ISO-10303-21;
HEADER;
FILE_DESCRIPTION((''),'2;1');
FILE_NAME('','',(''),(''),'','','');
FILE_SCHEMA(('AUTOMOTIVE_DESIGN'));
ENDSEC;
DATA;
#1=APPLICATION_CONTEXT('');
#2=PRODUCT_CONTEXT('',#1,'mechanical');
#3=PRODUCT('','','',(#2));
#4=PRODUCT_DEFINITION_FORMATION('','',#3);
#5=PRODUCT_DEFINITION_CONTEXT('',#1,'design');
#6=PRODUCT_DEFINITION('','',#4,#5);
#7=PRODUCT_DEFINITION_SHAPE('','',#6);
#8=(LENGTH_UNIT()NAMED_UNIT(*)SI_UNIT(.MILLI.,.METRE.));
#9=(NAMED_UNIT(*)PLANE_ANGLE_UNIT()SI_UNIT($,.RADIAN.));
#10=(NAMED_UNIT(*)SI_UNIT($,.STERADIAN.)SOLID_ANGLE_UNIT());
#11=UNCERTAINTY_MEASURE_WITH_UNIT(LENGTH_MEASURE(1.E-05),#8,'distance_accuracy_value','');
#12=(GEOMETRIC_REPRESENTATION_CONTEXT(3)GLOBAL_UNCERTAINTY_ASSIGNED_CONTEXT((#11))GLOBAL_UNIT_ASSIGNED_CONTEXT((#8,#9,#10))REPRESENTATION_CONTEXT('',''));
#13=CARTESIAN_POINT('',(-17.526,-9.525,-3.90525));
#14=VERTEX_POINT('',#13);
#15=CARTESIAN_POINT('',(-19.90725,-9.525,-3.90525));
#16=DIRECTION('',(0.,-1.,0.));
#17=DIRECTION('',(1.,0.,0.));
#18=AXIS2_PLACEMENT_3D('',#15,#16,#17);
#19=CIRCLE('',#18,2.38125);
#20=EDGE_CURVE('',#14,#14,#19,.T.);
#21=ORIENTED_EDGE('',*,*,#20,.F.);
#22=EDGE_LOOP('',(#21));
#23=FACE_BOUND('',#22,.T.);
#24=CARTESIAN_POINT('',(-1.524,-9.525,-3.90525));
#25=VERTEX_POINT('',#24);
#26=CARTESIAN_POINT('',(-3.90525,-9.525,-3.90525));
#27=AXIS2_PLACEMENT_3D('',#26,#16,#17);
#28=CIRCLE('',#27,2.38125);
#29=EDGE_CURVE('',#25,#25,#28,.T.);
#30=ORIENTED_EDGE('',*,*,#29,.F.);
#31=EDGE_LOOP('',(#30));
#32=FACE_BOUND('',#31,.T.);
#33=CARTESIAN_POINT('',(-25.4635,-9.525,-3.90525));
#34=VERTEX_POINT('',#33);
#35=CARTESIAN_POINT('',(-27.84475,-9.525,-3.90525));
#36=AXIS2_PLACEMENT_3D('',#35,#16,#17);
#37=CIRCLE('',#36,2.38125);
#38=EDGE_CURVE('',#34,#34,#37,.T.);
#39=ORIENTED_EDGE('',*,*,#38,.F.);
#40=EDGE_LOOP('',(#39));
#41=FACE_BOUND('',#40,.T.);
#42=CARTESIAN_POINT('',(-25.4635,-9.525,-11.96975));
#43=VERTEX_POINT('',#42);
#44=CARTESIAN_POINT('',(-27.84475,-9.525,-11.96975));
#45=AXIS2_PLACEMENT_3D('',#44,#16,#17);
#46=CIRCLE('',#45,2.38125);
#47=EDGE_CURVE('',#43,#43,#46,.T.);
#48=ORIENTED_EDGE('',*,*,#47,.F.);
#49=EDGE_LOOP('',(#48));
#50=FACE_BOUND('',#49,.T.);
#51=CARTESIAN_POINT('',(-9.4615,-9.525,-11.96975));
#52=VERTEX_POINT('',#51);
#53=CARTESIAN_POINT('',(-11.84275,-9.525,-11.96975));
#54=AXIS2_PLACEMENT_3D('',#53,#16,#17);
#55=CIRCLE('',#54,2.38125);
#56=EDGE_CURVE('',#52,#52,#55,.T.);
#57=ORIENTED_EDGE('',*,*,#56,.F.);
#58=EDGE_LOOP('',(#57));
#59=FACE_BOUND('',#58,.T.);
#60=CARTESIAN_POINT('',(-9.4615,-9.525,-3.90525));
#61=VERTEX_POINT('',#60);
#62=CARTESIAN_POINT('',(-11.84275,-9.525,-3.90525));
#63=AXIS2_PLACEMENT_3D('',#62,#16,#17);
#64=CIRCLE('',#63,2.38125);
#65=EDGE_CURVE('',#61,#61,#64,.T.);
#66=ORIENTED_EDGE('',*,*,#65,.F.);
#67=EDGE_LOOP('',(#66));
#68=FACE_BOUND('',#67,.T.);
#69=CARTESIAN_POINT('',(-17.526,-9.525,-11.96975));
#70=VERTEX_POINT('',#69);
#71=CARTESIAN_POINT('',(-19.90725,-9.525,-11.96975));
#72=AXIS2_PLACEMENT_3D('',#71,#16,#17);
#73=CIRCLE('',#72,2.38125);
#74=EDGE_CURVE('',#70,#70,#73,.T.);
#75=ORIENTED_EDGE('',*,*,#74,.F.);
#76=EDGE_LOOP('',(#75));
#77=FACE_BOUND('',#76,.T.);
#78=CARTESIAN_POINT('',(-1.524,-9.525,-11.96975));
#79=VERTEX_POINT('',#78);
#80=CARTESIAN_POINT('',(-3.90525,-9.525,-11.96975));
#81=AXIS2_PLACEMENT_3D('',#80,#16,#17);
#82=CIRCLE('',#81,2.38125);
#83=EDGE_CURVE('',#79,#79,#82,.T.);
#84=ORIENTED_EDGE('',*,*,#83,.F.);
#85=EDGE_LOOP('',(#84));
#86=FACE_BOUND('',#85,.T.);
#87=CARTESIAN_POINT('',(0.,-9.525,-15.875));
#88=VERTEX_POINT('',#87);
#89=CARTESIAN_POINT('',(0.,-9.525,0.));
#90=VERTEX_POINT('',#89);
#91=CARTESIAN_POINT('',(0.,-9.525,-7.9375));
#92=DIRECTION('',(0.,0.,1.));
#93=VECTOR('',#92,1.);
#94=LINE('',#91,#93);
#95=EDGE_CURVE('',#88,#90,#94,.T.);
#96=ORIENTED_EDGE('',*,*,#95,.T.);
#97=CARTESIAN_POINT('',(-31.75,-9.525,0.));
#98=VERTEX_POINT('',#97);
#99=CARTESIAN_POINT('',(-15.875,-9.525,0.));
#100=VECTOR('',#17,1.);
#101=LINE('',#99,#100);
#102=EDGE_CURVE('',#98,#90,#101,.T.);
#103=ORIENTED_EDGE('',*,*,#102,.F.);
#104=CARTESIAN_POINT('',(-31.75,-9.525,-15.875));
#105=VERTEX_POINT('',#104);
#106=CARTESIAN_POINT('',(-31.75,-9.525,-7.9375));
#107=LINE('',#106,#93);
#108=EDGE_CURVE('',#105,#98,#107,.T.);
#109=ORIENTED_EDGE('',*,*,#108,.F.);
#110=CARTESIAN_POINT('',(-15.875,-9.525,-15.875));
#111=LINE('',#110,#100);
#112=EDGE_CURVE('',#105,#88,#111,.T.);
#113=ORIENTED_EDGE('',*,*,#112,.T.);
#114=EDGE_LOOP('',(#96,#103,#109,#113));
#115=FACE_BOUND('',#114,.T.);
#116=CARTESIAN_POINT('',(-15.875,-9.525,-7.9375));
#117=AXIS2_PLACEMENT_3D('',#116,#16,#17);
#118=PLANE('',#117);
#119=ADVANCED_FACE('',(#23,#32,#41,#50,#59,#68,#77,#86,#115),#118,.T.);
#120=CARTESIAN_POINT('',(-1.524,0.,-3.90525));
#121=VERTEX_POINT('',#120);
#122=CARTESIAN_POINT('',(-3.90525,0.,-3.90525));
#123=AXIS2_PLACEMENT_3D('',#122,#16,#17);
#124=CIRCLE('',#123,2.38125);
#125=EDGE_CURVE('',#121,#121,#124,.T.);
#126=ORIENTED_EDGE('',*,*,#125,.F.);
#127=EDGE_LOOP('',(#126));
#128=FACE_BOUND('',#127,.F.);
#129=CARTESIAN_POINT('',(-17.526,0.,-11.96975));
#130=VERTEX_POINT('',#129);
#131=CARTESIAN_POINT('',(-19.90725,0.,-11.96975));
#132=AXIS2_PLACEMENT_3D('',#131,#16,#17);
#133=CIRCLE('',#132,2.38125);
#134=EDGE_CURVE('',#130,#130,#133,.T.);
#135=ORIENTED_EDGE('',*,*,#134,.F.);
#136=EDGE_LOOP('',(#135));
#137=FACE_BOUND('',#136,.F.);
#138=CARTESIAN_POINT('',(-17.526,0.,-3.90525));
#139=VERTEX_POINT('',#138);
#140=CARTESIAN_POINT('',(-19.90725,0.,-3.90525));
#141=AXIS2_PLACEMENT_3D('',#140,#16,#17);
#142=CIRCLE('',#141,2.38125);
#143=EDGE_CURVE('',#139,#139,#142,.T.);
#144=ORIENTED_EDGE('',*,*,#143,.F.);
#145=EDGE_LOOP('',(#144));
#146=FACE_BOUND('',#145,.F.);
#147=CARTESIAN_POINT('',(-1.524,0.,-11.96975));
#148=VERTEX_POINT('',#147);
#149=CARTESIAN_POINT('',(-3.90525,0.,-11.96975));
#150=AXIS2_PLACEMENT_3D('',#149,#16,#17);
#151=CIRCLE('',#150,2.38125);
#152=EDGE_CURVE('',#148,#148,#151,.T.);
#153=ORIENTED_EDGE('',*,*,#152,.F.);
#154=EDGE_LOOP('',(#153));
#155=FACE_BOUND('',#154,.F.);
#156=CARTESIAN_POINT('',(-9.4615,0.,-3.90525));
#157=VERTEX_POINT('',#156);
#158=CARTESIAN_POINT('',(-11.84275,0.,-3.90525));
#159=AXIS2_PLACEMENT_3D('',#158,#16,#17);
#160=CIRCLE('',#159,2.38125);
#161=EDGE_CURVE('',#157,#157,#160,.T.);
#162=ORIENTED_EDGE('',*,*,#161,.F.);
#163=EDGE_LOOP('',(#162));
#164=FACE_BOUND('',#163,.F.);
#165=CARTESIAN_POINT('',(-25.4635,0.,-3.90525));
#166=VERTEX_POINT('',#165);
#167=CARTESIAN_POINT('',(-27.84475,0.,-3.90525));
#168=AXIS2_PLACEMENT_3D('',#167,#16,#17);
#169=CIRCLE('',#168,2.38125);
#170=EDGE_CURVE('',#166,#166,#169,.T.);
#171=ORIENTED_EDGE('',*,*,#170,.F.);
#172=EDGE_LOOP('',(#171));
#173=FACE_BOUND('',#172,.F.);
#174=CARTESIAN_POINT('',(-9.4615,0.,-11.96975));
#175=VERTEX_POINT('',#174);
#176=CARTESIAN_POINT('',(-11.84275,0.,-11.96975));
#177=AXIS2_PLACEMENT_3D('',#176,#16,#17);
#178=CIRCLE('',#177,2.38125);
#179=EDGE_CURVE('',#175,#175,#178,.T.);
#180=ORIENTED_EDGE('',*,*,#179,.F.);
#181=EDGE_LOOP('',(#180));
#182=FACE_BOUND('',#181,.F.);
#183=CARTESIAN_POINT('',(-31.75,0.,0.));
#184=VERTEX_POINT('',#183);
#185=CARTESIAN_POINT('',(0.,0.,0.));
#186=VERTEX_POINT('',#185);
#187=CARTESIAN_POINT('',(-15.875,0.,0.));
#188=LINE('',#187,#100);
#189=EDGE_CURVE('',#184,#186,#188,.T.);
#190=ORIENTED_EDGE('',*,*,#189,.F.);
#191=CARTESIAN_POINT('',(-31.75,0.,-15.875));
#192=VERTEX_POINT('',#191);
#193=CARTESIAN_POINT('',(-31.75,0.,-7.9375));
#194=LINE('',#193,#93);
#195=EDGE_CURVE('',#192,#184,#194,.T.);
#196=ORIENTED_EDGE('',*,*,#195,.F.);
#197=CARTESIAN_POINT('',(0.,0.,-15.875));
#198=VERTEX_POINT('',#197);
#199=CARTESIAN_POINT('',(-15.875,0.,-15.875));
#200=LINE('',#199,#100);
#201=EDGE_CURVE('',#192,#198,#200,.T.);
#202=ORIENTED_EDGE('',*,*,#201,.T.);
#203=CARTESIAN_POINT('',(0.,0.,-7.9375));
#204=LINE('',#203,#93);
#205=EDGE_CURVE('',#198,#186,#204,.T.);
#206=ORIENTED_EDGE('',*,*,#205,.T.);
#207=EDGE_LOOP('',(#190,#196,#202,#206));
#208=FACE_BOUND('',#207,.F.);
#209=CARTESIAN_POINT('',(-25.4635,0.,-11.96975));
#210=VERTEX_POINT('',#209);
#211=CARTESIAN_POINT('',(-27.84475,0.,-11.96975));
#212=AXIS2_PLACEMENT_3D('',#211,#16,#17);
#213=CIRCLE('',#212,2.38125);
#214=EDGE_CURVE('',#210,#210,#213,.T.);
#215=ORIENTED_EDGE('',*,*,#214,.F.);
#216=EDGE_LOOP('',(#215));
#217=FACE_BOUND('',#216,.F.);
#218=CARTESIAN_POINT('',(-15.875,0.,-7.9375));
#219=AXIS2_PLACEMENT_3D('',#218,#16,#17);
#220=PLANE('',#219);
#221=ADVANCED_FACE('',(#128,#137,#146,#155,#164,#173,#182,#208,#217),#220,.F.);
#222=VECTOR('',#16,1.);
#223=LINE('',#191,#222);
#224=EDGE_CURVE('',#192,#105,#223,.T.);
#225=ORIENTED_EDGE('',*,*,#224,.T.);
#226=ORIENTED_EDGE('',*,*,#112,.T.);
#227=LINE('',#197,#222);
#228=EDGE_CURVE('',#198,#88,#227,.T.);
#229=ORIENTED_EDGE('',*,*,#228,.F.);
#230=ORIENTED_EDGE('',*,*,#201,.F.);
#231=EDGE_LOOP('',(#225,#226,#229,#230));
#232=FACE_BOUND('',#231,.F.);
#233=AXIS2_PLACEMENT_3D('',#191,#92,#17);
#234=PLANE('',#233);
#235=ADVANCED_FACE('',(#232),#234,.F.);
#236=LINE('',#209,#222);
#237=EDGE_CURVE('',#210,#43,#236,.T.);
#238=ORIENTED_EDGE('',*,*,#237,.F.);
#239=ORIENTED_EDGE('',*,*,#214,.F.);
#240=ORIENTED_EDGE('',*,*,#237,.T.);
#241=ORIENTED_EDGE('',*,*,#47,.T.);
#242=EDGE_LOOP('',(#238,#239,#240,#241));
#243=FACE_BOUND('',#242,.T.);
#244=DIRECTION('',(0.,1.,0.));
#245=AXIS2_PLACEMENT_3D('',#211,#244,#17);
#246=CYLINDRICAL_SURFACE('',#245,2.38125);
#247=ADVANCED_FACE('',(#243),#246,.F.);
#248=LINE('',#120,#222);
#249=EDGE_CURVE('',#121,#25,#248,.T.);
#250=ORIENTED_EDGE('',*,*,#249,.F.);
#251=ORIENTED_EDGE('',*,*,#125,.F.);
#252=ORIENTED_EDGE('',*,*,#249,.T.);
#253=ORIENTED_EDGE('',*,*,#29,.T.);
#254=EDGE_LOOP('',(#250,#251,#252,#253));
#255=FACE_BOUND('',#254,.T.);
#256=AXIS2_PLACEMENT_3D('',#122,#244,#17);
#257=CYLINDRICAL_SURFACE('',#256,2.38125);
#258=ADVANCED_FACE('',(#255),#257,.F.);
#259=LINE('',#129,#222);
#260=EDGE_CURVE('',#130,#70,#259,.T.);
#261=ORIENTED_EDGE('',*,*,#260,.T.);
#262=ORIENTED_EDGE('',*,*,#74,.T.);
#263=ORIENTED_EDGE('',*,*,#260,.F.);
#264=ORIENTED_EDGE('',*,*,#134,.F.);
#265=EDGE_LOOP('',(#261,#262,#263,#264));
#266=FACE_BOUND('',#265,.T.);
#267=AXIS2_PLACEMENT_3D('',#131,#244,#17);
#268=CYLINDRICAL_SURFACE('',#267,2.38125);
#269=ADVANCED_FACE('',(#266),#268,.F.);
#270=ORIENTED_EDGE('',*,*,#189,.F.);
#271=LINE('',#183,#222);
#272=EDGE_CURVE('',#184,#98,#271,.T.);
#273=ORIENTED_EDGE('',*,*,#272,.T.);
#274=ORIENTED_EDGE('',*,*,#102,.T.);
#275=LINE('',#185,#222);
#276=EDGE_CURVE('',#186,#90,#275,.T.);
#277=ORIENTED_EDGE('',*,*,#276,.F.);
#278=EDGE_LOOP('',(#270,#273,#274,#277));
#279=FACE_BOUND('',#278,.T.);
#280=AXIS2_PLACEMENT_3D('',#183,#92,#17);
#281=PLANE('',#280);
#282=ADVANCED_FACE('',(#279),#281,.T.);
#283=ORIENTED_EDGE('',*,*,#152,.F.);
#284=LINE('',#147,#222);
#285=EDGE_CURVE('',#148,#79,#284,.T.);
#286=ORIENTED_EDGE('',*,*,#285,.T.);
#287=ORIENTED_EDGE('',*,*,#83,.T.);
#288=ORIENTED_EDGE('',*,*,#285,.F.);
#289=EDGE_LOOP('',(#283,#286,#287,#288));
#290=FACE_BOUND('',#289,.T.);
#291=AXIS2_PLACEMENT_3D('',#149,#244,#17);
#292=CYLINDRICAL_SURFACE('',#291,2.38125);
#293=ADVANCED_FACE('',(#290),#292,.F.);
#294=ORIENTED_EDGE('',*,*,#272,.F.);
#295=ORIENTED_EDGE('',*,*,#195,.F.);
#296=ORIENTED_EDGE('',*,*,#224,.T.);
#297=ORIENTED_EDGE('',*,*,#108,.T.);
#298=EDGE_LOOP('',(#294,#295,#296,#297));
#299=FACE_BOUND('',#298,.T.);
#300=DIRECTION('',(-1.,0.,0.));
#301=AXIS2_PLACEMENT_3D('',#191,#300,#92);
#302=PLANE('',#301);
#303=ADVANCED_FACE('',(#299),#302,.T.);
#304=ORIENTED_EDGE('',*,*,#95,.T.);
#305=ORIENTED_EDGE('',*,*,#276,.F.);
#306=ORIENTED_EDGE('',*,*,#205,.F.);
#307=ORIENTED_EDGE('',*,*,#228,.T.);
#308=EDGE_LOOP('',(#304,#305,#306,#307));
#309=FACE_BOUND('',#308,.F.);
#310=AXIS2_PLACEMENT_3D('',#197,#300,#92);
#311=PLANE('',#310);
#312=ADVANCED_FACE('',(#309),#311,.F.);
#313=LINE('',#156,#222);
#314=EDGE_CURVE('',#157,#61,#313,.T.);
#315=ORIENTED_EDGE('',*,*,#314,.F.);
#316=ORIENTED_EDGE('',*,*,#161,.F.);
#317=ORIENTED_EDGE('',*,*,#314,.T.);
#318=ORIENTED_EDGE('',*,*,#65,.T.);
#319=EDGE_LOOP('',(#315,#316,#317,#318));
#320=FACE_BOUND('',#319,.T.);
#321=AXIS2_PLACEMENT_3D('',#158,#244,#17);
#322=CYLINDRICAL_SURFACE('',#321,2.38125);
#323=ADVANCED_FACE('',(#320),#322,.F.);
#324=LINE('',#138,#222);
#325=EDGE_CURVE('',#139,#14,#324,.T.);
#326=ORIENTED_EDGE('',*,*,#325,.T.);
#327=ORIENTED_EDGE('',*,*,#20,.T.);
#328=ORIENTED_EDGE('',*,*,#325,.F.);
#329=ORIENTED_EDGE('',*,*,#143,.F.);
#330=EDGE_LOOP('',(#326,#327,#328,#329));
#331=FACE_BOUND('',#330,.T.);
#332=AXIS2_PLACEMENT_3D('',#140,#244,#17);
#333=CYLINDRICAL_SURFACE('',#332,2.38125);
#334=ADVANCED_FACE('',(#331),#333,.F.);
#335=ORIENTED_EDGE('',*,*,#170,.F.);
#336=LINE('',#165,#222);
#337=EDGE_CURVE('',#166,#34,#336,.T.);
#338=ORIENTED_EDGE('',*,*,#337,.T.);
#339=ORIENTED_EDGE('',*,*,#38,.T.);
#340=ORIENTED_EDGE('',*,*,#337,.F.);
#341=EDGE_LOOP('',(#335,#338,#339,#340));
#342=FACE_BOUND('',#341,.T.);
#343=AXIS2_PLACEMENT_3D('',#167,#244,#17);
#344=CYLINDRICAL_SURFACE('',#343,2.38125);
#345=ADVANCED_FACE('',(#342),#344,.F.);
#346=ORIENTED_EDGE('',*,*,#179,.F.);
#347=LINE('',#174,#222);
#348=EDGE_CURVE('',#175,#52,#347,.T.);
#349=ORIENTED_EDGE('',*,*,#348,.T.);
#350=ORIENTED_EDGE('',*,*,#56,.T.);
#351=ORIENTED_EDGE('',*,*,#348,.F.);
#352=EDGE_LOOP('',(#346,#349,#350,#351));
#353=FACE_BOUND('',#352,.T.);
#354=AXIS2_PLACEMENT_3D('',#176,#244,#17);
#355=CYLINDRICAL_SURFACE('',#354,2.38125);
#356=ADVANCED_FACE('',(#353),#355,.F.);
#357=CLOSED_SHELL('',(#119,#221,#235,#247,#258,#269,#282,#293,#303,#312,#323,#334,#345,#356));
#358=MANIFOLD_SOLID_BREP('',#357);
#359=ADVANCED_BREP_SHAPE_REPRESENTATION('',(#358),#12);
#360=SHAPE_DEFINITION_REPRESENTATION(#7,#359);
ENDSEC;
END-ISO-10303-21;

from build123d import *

# Parameters (mm, degrees)
F0_W     = 31.75
F0_H     = 15.875
F0_R     = 2.38125
F1_DEPTH = 9.525


# Not quite as in the source:
# - the program builds the solid bodies; features that only make, move or delete a surface that nothing else refers to are left out


with BuildPart() as f1:
    # F0 (on Front) → F1 (new body)
    with BuildSketch(Plane.XZ):
        with Locations((-15.875, -7.9375)):
            Rectangle(F0_W, F0_H)
        with Locations((-27.84475, -11.96975)):
            Circle(F0_R, mode=Mode.SUBTRACT)
        with Locations((-19.90725, -11.96975)):
            Circle(F0_R, mode=Mode.SUBTRACT)
        with Locations((-11.84275, -11.96975)):
            Circle(F0_R, mode=Mode.SUBTRACT)
        with Locations((-3.90525, -11.96975)):
            Circle(F0_R, mode=Mode.SUBTRACT)
        with Locations((-27.84475, -3.90525)):
            Circle(F0_R, mode=Mode.SUBTRACT)
        with Locations((-19.90725, -3.90525)):
            Circle(F0_R, mode=Mode.SUBTRACT)
        with Locations((-11.84275, -3.90525)):
            Circle(F0_R, mode=Mode.SUBTRACT)
        with Locations((-3.90525, -3.90525)):
            Circle(F0_R, mode=Mode.SUBTRACT)
    extrude(amount=F1_DEPTH)


solid = f1.part
